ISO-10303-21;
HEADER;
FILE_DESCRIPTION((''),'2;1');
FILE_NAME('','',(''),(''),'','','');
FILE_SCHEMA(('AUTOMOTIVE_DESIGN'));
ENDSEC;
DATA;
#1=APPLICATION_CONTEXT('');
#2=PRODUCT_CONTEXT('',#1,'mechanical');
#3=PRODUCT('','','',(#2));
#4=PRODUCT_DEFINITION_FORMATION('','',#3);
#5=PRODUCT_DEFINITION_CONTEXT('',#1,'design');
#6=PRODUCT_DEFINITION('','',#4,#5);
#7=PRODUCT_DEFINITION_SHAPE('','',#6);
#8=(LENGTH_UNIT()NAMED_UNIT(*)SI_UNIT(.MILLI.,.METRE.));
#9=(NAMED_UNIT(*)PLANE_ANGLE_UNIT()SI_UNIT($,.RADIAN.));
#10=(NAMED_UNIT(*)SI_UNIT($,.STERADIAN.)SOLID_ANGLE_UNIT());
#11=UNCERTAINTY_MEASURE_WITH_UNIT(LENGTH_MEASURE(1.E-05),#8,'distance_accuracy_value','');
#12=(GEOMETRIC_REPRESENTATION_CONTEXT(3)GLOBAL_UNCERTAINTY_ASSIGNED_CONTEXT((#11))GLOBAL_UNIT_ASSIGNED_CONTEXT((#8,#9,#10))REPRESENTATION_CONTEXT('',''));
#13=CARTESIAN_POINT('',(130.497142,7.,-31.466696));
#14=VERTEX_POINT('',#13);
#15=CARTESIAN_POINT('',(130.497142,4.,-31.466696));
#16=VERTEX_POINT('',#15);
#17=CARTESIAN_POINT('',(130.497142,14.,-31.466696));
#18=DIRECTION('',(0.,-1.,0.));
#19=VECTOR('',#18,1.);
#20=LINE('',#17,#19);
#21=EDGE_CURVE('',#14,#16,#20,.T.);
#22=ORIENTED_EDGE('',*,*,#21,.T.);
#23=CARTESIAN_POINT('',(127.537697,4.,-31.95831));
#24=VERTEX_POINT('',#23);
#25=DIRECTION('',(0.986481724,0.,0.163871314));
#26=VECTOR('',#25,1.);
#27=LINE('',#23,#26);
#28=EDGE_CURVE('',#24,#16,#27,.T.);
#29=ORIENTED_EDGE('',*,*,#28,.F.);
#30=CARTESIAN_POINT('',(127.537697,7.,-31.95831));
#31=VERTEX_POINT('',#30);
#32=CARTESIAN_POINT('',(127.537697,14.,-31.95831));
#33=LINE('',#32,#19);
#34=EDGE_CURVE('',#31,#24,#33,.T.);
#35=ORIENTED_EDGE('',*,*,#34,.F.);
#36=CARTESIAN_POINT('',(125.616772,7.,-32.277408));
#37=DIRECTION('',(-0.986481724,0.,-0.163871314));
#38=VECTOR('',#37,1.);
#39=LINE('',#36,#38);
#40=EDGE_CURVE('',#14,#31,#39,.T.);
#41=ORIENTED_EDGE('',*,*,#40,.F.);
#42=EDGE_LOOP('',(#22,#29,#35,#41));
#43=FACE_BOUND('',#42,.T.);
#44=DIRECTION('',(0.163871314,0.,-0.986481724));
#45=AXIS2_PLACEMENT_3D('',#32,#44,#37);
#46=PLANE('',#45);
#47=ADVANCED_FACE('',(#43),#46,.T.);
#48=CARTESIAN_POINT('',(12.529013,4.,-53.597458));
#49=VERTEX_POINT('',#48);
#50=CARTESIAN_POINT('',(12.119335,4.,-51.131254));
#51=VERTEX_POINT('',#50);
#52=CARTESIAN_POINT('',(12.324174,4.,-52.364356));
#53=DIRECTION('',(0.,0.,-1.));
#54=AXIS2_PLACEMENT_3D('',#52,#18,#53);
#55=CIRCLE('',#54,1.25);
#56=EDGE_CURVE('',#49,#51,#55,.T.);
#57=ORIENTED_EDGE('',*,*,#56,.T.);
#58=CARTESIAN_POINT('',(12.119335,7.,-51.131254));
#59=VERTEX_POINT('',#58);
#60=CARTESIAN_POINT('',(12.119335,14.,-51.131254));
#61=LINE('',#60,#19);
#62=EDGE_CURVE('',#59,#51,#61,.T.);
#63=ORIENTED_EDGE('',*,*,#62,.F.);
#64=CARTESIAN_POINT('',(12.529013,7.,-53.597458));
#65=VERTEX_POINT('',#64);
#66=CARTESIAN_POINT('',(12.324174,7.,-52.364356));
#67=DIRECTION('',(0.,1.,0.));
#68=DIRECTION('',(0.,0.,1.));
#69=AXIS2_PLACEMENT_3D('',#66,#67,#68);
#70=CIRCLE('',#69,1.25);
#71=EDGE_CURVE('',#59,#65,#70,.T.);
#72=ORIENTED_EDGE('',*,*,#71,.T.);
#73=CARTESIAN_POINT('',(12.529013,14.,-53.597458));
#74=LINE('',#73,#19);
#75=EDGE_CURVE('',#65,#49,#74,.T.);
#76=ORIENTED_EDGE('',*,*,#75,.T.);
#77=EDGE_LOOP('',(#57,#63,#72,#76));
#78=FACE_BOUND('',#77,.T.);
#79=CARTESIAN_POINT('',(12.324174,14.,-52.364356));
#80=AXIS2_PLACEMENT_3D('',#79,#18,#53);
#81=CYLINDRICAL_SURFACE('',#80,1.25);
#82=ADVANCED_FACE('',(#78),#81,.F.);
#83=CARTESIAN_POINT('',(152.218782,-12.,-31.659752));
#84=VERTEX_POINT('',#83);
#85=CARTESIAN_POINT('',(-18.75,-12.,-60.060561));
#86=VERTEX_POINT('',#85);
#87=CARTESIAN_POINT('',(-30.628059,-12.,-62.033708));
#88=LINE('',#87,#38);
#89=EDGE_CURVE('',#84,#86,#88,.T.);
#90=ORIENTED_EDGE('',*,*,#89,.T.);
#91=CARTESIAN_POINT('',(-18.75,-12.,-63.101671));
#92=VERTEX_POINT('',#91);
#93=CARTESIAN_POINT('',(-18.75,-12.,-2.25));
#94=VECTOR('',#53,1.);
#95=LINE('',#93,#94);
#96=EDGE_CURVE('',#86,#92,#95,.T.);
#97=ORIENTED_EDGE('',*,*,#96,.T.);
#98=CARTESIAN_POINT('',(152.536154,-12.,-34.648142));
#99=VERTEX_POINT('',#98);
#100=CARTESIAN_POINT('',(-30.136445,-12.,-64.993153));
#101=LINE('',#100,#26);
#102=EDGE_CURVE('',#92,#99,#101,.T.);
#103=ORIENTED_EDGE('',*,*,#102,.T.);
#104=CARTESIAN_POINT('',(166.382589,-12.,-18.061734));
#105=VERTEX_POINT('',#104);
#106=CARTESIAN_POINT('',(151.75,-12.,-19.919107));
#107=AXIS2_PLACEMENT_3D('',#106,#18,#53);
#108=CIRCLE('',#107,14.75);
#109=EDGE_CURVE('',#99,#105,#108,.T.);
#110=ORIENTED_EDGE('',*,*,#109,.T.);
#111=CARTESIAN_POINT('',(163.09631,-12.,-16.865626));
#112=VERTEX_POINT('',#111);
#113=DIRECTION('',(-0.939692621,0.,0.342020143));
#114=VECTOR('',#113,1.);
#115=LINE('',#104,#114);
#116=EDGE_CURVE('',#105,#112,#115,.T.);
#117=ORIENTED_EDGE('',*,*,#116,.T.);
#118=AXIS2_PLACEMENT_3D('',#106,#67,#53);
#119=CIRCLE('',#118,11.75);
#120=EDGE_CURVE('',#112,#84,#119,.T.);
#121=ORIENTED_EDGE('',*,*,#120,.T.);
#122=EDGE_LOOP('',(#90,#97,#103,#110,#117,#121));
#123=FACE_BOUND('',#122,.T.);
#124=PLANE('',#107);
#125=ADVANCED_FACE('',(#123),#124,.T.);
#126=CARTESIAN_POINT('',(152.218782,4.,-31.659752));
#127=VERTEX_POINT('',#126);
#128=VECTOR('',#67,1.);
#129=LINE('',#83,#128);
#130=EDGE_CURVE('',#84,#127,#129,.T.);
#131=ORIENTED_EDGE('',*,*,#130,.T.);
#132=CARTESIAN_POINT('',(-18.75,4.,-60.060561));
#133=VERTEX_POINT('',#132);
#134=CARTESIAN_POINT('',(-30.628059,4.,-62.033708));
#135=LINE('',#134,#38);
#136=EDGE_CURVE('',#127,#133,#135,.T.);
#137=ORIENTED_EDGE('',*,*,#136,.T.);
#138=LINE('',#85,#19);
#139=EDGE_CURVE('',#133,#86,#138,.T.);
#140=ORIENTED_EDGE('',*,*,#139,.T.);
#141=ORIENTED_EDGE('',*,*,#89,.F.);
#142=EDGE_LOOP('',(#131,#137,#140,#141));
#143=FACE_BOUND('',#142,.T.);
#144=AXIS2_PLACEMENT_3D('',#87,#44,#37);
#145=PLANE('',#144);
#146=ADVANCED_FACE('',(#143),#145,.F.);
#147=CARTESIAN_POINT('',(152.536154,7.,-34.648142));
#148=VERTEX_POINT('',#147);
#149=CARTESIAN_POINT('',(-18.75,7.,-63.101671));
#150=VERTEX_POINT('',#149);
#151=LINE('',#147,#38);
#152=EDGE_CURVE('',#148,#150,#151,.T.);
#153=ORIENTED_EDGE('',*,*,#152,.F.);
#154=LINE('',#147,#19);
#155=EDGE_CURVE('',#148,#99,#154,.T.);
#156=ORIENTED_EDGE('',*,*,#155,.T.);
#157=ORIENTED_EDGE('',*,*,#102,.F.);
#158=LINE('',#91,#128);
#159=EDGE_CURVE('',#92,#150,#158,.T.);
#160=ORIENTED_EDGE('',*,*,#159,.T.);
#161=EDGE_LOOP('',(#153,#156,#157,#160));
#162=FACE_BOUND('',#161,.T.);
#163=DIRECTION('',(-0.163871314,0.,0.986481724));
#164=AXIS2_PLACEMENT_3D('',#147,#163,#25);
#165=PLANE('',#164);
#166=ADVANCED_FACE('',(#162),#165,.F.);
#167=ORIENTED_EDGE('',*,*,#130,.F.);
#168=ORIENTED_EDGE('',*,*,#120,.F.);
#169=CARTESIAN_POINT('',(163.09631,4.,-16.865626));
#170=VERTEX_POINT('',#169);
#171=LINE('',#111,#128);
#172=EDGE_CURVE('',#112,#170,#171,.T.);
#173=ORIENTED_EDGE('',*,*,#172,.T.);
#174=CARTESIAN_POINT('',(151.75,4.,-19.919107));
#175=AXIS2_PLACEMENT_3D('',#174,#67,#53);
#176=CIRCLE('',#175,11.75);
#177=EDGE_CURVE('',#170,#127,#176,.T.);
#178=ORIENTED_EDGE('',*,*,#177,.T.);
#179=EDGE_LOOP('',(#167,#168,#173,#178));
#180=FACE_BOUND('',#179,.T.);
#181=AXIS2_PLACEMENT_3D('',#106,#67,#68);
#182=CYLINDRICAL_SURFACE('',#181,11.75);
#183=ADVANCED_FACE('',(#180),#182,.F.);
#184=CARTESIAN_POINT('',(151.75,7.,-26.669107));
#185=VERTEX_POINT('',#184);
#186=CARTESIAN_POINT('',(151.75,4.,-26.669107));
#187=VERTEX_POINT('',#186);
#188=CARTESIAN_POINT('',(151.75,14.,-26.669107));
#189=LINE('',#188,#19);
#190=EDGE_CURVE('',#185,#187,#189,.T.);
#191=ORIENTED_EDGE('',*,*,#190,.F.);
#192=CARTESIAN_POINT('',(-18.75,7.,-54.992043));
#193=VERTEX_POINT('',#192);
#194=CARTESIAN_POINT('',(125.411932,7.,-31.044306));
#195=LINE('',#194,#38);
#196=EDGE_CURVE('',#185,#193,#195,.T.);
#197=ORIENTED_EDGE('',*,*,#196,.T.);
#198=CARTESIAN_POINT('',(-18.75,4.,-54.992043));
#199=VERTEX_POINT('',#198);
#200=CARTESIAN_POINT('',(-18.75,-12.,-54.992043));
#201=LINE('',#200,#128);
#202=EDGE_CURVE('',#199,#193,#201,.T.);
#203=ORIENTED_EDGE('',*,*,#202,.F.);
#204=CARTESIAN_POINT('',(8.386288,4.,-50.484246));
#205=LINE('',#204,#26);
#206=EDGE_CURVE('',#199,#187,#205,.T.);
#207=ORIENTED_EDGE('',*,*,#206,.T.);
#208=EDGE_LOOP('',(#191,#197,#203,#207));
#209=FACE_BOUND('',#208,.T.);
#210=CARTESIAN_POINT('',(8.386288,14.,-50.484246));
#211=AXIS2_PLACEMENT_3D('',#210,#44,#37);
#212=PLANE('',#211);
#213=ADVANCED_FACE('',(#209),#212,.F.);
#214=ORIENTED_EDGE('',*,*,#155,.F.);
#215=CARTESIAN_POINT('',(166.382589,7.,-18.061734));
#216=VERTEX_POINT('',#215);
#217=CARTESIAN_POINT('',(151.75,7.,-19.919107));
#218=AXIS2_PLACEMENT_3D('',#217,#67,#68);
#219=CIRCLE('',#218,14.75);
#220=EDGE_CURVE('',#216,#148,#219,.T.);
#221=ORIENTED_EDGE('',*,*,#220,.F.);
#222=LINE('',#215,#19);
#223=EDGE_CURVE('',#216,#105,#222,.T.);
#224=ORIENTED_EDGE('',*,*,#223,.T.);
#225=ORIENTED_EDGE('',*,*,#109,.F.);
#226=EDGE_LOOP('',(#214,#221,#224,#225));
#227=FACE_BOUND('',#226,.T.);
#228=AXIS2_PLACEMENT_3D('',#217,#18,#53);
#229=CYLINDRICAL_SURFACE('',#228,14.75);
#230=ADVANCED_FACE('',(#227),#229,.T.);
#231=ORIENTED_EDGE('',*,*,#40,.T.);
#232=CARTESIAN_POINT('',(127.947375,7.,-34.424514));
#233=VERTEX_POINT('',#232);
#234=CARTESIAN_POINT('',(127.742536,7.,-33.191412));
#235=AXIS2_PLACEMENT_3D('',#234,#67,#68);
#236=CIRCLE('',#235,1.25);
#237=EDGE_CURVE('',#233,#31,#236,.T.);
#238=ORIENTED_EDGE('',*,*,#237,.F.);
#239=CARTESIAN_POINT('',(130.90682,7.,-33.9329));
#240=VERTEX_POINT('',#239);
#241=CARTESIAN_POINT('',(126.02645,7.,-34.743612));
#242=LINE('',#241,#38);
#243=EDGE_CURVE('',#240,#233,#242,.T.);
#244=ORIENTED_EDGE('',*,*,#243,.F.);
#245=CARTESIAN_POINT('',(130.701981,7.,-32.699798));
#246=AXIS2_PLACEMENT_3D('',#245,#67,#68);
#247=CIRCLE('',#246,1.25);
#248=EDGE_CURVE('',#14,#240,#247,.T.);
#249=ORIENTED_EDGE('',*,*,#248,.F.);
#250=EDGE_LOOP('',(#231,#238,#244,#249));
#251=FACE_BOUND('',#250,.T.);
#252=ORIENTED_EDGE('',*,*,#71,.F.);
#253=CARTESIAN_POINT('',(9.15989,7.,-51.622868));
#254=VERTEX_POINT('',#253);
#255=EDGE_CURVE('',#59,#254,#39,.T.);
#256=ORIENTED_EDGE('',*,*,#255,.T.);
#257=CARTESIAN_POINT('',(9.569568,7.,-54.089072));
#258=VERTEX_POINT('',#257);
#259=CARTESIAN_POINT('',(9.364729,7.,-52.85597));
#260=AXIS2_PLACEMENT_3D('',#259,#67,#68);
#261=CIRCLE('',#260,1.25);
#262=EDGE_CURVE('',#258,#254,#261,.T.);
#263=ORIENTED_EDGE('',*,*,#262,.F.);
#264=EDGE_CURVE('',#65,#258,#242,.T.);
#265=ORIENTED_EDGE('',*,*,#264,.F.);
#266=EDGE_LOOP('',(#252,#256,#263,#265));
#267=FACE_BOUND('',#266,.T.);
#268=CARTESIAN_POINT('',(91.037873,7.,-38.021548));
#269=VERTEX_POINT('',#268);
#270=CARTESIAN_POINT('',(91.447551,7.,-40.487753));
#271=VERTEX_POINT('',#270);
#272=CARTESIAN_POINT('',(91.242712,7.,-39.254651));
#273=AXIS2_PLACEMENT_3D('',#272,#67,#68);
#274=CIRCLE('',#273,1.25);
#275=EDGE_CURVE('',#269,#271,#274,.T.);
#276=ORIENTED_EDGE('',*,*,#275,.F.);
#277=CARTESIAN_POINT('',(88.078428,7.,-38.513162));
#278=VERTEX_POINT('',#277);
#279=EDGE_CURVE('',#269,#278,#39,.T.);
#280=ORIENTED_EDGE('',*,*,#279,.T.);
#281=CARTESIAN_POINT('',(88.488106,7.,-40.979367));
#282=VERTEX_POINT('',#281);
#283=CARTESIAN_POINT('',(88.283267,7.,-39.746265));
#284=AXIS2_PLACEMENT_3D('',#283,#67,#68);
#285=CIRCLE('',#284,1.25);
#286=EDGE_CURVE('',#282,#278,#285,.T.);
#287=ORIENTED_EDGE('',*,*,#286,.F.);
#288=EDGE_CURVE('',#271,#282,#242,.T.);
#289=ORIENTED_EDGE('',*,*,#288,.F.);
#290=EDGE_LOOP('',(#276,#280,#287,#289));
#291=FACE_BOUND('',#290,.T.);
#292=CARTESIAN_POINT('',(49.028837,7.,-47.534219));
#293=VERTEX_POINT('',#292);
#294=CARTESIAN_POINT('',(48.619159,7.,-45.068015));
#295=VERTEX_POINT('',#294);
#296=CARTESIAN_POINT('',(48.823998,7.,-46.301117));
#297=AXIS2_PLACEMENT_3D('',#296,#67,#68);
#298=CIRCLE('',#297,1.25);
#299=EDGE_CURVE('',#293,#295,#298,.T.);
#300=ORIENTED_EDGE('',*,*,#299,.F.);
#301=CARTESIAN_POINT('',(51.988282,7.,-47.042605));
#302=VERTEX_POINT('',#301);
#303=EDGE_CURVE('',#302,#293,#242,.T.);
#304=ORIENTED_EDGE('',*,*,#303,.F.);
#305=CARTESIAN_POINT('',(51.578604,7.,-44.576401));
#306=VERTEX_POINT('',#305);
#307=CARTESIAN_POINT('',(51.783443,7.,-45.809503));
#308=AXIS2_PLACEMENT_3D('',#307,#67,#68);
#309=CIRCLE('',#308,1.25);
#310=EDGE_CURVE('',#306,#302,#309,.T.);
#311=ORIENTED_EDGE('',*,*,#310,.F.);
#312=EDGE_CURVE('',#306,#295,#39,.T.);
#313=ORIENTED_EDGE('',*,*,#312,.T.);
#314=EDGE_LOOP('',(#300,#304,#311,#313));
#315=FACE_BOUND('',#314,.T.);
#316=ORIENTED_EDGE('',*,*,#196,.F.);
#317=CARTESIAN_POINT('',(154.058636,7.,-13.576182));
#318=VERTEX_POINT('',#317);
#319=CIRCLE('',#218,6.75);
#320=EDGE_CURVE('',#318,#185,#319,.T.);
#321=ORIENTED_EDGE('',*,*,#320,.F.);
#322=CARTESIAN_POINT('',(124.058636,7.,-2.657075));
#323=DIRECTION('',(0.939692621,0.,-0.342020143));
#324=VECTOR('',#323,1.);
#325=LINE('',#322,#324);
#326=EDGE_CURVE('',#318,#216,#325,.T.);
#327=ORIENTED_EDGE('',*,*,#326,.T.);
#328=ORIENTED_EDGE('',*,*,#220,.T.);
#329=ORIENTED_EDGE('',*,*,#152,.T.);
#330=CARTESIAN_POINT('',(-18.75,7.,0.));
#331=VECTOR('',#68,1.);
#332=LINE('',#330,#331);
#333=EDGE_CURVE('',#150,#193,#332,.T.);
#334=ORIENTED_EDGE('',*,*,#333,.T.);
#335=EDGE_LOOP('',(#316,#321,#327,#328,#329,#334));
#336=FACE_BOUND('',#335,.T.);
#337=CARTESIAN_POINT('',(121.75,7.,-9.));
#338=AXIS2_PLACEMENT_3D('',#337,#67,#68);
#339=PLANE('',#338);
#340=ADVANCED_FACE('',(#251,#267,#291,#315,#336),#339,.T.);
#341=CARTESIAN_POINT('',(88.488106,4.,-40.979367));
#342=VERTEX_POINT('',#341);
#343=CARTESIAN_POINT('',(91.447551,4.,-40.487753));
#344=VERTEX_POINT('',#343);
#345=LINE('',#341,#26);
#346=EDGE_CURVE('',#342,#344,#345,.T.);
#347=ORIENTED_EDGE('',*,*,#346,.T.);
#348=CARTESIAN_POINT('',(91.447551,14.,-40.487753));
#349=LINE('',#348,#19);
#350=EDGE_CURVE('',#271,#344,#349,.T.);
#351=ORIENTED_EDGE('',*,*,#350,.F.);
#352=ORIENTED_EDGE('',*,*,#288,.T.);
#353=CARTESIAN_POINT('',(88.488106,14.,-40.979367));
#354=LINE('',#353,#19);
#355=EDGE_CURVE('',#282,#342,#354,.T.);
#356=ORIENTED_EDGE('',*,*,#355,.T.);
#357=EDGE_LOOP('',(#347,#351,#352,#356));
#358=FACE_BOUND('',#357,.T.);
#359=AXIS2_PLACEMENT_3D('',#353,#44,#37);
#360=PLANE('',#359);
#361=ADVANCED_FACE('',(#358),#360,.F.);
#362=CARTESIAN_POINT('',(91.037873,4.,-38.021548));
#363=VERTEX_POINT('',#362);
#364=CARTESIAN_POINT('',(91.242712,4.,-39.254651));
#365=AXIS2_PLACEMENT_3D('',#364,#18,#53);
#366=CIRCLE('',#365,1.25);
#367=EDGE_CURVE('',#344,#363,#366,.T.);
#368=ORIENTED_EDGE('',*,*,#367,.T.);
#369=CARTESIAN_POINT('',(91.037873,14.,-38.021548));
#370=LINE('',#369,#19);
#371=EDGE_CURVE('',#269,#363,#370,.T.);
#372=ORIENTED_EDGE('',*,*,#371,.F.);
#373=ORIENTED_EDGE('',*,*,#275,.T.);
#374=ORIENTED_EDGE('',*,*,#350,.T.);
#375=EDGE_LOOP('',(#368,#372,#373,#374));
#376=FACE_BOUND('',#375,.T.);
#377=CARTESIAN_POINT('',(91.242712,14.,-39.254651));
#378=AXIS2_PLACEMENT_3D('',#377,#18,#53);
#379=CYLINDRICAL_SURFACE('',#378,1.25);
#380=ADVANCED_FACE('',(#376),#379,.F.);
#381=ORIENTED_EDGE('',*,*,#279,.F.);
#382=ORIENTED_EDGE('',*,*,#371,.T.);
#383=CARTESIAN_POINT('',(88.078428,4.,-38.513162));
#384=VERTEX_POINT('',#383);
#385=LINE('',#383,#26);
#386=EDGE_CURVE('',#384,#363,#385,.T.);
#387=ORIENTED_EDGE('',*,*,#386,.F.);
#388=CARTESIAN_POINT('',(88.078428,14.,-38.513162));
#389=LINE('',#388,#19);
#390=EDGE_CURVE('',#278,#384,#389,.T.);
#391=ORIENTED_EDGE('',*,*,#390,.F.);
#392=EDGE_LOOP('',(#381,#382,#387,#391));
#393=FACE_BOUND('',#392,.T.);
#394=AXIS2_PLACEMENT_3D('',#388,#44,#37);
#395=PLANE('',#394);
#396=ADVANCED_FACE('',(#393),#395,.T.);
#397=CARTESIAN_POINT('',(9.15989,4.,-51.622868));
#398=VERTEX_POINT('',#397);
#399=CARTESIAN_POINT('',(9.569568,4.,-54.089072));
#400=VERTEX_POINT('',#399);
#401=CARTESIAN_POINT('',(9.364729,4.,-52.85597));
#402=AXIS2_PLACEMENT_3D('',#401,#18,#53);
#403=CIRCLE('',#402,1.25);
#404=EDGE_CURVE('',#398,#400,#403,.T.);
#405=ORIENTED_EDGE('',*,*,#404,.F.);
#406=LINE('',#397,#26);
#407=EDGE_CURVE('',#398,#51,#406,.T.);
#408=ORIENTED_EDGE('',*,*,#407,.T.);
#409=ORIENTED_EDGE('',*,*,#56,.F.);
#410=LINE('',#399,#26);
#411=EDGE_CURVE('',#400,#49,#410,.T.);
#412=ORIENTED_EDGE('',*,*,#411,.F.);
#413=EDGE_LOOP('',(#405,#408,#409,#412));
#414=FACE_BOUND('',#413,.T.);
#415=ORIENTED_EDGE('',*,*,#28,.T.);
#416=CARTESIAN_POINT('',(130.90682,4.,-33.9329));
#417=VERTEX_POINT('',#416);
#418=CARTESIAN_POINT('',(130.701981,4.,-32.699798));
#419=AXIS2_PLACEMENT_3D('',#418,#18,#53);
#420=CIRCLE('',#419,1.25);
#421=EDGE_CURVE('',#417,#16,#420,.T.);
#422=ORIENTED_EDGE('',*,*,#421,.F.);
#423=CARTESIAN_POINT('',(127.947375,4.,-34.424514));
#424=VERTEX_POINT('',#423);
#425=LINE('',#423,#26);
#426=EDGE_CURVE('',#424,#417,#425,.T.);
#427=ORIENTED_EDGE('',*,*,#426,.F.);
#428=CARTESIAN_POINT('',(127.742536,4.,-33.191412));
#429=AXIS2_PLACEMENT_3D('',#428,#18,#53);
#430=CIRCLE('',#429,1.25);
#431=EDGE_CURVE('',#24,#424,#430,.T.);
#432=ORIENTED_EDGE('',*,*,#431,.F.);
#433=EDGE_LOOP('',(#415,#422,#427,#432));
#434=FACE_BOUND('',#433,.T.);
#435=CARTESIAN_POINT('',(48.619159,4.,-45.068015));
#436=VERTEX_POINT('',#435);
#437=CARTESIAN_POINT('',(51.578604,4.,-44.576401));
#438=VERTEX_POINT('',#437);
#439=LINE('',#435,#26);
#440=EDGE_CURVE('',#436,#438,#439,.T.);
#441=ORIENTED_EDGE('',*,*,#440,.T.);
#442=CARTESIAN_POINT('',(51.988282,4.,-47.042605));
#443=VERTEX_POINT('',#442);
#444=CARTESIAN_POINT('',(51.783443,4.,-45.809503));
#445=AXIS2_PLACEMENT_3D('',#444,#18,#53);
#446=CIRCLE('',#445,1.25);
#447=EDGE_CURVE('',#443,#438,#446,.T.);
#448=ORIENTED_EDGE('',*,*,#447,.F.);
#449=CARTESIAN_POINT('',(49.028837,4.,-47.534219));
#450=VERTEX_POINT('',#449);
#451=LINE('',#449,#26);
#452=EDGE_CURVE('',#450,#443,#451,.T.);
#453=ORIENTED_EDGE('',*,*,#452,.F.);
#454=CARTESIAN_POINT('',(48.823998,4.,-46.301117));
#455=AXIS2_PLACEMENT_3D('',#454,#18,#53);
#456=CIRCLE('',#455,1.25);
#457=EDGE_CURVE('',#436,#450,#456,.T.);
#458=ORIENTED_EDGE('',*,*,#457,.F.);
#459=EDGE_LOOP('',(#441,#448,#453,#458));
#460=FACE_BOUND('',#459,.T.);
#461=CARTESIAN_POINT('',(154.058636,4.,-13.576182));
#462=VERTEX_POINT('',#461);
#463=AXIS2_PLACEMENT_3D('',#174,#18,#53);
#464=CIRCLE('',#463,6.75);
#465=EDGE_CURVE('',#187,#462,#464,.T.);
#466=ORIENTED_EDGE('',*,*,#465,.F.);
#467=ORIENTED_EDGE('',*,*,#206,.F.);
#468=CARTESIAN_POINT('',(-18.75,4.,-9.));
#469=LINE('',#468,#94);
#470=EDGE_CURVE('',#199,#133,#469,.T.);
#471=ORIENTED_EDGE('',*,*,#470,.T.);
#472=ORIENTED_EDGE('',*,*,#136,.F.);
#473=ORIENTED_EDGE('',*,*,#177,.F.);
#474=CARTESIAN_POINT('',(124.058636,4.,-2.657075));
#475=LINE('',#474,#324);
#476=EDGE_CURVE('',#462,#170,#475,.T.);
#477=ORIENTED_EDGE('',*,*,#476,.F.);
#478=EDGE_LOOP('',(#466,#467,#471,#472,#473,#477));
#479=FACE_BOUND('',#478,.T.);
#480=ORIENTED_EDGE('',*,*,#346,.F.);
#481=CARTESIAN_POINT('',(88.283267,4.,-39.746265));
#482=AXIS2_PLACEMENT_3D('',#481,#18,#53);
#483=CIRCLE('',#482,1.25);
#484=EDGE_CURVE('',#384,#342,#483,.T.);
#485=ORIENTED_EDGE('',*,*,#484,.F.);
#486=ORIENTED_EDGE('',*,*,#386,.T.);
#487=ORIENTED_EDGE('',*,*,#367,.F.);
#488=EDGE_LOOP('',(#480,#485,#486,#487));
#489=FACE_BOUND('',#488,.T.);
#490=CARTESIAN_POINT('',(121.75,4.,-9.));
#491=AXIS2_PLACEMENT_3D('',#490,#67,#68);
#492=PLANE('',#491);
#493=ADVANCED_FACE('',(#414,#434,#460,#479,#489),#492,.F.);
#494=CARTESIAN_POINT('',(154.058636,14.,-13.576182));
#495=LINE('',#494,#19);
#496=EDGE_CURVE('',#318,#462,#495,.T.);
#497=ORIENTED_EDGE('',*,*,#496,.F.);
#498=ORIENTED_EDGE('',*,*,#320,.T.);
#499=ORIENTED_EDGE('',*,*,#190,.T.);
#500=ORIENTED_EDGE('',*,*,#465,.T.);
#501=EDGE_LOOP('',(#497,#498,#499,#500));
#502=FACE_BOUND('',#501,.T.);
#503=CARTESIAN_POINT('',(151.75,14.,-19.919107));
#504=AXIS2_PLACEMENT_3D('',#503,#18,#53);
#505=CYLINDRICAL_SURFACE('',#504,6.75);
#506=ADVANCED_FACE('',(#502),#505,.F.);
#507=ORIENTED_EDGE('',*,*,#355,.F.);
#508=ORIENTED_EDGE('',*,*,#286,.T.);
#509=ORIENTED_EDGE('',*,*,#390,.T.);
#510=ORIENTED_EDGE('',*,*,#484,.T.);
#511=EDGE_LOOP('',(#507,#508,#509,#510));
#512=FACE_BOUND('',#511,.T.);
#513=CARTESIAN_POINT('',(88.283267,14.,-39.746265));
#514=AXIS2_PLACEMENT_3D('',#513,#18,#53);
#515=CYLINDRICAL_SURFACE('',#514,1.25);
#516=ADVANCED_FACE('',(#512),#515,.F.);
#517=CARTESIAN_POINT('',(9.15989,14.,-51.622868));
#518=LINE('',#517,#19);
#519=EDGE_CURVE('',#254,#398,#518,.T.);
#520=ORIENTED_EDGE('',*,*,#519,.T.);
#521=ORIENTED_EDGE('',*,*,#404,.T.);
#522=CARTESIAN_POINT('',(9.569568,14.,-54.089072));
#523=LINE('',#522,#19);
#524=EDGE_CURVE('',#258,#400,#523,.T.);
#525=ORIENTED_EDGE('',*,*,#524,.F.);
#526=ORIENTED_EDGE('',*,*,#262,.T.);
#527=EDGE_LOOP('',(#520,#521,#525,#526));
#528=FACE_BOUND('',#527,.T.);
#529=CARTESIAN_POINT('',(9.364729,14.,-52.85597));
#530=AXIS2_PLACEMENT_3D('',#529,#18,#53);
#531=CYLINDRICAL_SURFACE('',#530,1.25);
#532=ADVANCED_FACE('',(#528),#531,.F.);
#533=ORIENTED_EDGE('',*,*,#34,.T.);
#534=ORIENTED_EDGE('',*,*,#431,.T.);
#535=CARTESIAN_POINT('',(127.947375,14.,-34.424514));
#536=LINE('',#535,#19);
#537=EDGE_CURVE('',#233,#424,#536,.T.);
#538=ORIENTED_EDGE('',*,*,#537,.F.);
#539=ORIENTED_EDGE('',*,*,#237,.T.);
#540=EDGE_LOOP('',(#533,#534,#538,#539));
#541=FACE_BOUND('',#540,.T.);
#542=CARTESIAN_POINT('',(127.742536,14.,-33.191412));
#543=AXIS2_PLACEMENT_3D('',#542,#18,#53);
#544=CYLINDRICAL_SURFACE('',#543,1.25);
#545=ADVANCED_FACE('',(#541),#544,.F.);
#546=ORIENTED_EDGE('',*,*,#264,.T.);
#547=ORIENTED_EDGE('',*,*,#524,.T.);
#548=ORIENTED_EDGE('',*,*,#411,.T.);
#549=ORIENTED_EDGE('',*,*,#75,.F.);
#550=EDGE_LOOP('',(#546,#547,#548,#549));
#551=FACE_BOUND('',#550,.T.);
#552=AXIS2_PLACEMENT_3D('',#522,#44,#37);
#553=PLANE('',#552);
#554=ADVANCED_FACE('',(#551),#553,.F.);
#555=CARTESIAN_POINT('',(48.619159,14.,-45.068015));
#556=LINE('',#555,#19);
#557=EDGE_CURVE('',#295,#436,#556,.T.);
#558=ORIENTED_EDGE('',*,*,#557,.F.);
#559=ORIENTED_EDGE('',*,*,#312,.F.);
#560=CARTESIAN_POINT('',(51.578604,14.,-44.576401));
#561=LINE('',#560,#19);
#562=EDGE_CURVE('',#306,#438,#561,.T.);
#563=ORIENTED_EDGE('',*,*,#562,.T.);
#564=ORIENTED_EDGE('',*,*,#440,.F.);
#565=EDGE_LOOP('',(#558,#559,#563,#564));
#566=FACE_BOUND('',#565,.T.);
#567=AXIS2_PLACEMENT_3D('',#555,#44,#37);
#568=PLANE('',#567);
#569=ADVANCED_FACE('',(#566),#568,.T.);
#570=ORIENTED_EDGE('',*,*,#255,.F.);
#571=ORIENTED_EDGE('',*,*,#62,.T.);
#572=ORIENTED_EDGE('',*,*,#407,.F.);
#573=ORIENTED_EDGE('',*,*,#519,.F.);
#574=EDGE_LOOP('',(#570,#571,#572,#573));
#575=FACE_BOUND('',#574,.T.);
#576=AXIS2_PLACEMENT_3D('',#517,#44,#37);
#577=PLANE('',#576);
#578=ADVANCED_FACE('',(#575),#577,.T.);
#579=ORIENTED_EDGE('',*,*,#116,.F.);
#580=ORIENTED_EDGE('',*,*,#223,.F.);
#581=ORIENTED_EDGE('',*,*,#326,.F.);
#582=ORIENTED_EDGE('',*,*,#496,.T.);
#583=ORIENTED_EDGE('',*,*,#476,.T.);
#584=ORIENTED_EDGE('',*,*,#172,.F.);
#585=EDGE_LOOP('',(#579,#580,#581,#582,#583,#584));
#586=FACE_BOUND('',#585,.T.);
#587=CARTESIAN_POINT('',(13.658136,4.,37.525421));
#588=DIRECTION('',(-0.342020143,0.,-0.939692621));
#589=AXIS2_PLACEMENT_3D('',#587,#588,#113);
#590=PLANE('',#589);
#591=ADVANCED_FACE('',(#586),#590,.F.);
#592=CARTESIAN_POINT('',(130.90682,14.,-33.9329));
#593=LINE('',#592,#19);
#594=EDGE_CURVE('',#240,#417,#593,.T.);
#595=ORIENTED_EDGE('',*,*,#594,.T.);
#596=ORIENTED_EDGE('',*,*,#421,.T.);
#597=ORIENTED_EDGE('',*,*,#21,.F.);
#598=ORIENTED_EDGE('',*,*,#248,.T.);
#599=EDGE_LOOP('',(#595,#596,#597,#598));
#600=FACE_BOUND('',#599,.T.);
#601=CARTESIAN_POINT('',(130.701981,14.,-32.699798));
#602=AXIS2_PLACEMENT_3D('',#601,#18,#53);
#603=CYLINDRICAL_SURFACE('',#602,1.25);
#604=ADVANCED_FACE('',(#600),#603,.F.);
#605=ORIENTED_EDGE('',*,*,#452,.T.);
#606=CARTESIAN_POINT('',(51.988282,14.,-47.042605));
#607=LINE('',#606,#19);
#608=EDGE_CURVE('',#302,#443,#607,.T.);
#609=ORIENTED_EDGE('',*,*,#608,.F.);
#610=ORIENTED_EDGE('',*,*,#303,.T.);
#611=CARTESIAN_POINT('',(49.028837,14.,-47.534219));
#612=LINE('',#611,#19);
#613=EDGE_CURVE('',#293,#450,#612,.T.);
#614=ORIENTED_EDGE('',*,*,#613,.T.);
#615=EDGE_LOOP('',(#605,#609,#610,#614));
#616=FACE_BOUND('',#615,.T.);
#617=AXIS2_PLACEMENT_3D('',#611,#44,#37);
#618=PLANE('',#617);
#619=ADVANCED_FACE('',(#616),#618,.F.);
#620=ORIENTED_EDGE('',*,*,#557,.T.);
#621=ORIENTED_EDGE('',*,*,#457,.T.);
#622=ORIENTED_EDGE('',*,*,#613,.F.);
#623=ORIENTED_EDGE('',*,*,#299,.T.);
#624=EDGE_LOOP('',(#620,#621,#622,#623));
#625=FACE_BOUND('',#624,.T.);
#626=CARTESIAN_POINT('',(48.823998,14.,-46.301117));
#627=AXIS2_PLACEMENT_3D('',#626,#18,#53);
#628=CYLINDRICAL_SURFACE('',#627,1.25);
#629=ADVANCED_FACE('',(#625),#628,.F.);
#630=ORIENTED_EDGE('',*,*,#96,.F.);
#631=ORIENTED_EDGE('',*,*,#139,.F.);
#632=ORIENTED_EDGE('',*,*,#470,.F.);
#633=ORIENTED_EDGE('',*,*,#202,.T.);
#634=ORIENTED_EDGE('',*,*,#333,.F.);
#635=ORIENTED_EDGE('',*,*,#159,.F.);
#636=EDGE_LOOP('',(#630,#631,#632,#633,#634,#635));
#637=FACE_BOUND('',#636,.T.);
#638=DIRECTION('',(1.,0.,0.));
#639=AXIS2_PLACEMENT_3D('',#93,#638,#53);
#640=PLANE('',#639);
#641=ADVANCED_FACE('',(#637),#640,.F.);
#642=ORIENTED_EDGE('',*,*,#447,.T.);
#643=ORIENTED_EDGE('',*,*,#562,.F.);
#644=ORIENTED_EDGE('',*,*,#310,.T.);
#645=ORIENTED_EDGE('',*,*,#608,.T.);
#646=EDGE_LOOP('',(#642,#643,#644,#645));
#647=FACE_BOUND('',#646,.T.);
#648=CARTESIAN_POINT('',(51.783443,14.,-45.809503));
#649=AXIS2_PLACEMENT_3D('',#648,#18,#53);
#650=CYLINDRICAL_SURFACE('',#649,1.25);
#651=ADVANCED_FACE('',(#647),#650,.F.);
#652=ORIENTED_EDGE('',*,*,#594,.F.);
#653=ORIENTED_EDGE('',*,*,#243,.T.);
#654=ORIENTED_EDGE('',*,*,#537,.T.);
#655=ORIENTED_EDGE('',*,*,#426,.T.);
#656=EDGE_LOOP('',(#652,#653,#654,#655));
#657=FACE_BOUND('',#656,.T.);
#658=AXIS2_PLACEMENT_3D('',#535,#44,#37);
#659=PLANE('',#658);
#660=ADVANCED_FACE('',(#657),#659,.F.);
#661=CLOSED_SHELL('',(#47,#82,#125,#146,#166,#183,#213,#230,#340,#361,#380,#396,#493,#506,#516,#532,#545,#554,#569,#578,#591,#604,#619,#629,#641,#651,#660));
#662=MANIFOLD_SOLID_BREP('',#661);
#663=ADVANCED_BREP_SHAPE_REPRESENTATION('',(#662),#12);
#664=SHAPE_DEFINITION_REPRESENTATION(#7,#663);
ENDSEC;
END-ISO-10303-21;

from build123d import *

# Parameters (mm, degrees)
SKETCH_1_W           = 35
SKETCH_1_H           = 55
EXTRUDE_1_DEPTH      = 1
EXTRUDE_2_DEPTH      = 3
SKETCH_3_R           = 5
CUT_EXTRUDE_1_DEPTH  = 169.569903897
SKETCH_4_R           = 4
CUT_EXTRUDE_2_DEPTH  = 2
SKETCH_5_R           = 2
CUT_EXTRUDE_3_DEPTH  = 2
EXTRUDE_START        = 7
EXTRUDE_3_DEPTH      = 7
CUT_EXTRUDE_START    = -1.5
SKETCH_9_W           = 10
SKETCH_9_H           = 26
CUT_EXTRUDE_4_DEPTH  = 168.318874833
SKETCH_10_R          = 1.5
CUT_EXTRUDE_5_DEPTH  = 194.595583627
EXTRUDE_4_DEPTH      = 3
SKETCH_13_W          = 334.012533363
SKETCH_13_H          = 161.456209481
CUT_EXTRUDE_6_DEPTH  = 10
SKETCH_14_R          = 3.5
CUT_EXTRUDE_7_DEPTH  = 2.5
SKETCH_15_R          = 5
CUT_EXTRUDE_8_DEPTH  = 179.854165453
EXTRUDE_START_2      = 16
EXTRUDE_5_DEPTH      = 16
EXTRUDE_6_DEPTH      = 7
SKETCH_19_W          = 10
SKETCH_19_H          = 26
CUT_EXTRUDE_9_DEPTH  = 180.209193181
SKETCH_20_R          = 1.5
CUT_EXTRUDE_10_DEPTH = 175.844216376
THREAD_1_PITCH       = 0.6
CUT_EXTRUDE_11_DEPTH = 181.709193232
SKETCH_22_W          = 13
SKETCH_22_H          = 1.5
CUT_EXTRUDE_12_DEPTH = 7
SKETCH_23_R          = 5
EXTRUDE_7_DEPTH      = 2
CUT_EXTRUDE_START_2  = -3
CUT_EXTRUDE_15_DEPTH = 177.762490825
SKETCH_25_R          = 7.5
CUT_EXTRUDE_16_DEPTH = 4
CUT_EXTRUDE_17_DEPTH = 10
SKETCH_27_R          = 1.75
CUT_EXTRUDE_18_DEPTH = 10
CUT_EXTRUDE_19_DEPTH = 180.762490825
CUT_EXTRUDE_START_3  = -10
SKETCH_29_R          = 3.5
CUT_EXTRUDE_23_DEPTH = 10
CUT_EXTRUDE_24_DEPTH = 10


with BuildPart() as part:
    # Sketch 1 → 凸台-拉伸1 (new body)
    with BuildSketch(Plane(origin=(0, 0, 0), x_dir=(1, 0, 0), z_dir=(0, 1, 0))):
        Rectangle(SKETCH_1_W, SKETCH_1_H)
    extrude(amount=EXTRUDE_1_DEPTH)

    # 草图2 → 凸台-拉伸2 (add)
    with BuildSketch(Plane(origin=(0, 1, 0), x_dir=(1, 0, 0), z_dir=(0, 1, 0))):
        with BuildLine():
            Line((106.75, -2.25), (106.75, 2.25))
            Line((106.75, 2.25), (121.75, 2.25))
            ThreePointArc((121.75, 2.25), (122.922125199, 2.352547667), (124.058635967, 2.65707481))
            Line((124.058635967, 2.65707481), (154.058635967, 13.576181838))
            ThreePointArc((154.058635967, 13.576181838), (158.397452333, 21.091232227), (151.75, 26.669107028))
            Line((151.75, 26.669107028), (-31.447415548, 57.101298968))
            ThreePointArc((-31.447415548, 57.101298968), (-37.800418235, 56.264673928), (-42.609265279, 52.029632639))
            Line((-42.609265279, 52.029632639), (-60.161792173, 23.605896086))
            ThreePointArc((-60.161792173, 23.605896086), (-61.717833724, 20.073278016), (-62.25, 16.25))
            Line((-62.25, 16.25), (-62.25, -16.25))
            ThreePointArc((-62.25, -16.25), (-61.717833724, -20.073278016), (-60.161792173, -23.605896086))
            Line((-60.161792173, -23.605896086), (-42.609265279, -52.029632639))
            ThreePointArc((-42.609265279, -52.029632639), (-37.800418235, -56.264673928), (-31.447415548, -57.101298968))
            Line((-31.447415548, -57.101298968), (151.75, -26.669107028))
            ThreePointArc((151.75, -26.669107028), (158.397452333, -21.091232227), (154.058635967, -13.576181838))
            Line((154.058635967, -13.576181838), (124.058635967, -2.65707481))
            ThreePointArc((124.058635967, -2.65707481), (122.922125199, -2.352547667), (121.75, -2.25))
            Line((121.75, -2.25), (106.75, -2.25))
        make_face()
    extrude(amount=EXTRUDE_2_DEPTH)

    # 草图3 → 切除-拉伸1 (cut, through all)
    with BuildSketch(Plane(origin=(0, 4, 0), x_dir=(1, 0, 0), z_dir=(0, 1, 0))):
        with Locations(Location((-48.25, 16.25, 0), (0, 0, 270))):
            Circle(SKETCH_3_R)
        with Locations(Location((-48.25, -16.25, 0), (0, 0, 270))):
            Circle(SKETCH_3_R)
    extrude(amount=-CUT_EXTRUDE_1_DEPTH, mode=Mode.SUBTRACT)

    # 草图4 → 切除-拉伸2 (cut)
    with BuildSketch(Plane(origin=(0, 4, 0), x_dir=(1, 0, 0), z_dir=(0, 1, 0))):
        with Locations(Location((-33.25, 46.25, 0), (0, 0, 270))):
            Circle(SKETCH_4_R)
        with Locations(Location((-33.25, -46.25, 0), (0, 0, 270))):
            Circle(SKETCH_4_R)
    extrude(amount=-CUT_EXTRUDE_2_DEPTH, mode=Mode.SUBTRACT)

    # 草图5 → 切除-拉伸3 (cut)
    with BuildSketch(Plane(origin=(0, 4, 0), x_dir=(1, 0, 0), z_dir=(0, 1, 0))):
        with Locations(Location((121.75, 9, 0), (0, 0, 270))):
            Circle(SKETCH_5_R)
        with Locations(Location((121.75, -9, 0), (0, 0, 270))):
            Circle(SKETCH_5_R)
        with Locations(Location((151.75, 19.919107028, 0), (0, 0, 270))):
            Circle(SKETCH_5_R)
        with Locations(Location((151.75, -19.919107028, 0), (0, 0, 270))):
            Circle(SKETCH_5_R)
    extrude(amount=-CUT_EXTRUDE_3_DEPTH, mode=Mode.SUBTRACT)

    # 草图8 → 凸台-拉伸3 (add)
    with BuildSketch(Plane.XZ.offset(-1).offset(EXTRUDE_START)):
        with BuildLine():
            Line((-26.75, -26.25), (-39.75, -26.25))
            Line((-39.75, -26.25), (-39.75, -55.124119675))
            ThreePointArc((-39.75, -55.124119675), (-35.798281322, -56.950759894), (-31.447415548, -57.101298968))
            Line((-31.447415548, -57.101298968), (-26.75, -56.320978726))
            Line((-26.75, -56.320978726), (-26.75, -26.25))
        make_face()
    extrude_3 = extrude(amount=-EXTRUDE_3_DEPTH)

    # 镜向1: 凸台-拉伸3 across plane
    add(extrude_3.mirror(Plane.XY))

    # 草图9 → 切除-拉伸4 (cut, through all)
    with BuildSketch(Plane.XZ.offset(6).offset(CUT_EXTRUDE_START)):
        with Locations((-33.25, -40.75)):
            Rectangle(SKETCH_9_W, SKETCH_9_H)
    cut_extrude_4 = extrude(amount=-CUT_EXTRUDE_4_DEPTH, mode=Mode.SUBTRACT)

    # 镜向2: 切除-拉伸4 across plane
    add(cut_extrude_4.mirror(Plane.XY), mode=Mode.SUBTRACT)

    # 草图10 → 切除-拉伸5 (cut, through all)
    with BuildSketch(Plane.XY.offset(-53.75)):
        with Locations((-33.25, -1.5)):
            Circle(SKETCH_10_R)
    cut_extrude_5 = extrude(amount=-CUT_EXTRUDE_5_DEPTH, mode=Mode.SUBTRACT)

    # 镜向3: 切除-拉伸5 across plane
    add(cut_extrude_5.mirror(Plane.XY), mode=Mode.SUBTRACT)

    # 草图12 → 凸台-拉伸4 (add)
    with BuildSketch(Plane(origin=(0, 4, 0), x_dir=(1, 0, 0), z_dir=(0, 1, 0))):
        with BuildLine():
            Line((152.536154407, 34.648141662), (-30.136445037, 64.993152763))
            ThreePointArc((-30.136445037, 64.993152763), (-32.296727103, 65.226071005), (-34.469475839, 65.210824842))
            Line((-34.469475839, 65.210824842), (-60.161792173, 23.605896086))
            ThreePointArc((-60.161792173, 23.605896086), (-61.717833724, 20.073278016), (-62.25, 16.25))
            Line((-62.25, 16.25), (-62.25, 2.25))
            Line((-62.25, 2.25), (121.75, 2.25))
            ThreePointArc((121.75, 2.25), (122.922125199, 2.352547667), (124.058635967, 2.65707481))
            Line((124.058635967, 2.65707481), (166.382589153, 18.061733966))
            ThreePointArc((166.382589153, 18.061733966), (163.073058037, 29.371665237), (152.536154407, 34.648141662))
        make_face()
    extrude(amount=EXTRUDE_4_DEPTH)

    # 草图13 → 切除-拉伸6 (cut)
    with BuildSketch(Plane.XZ.offset(-4)):
        with Locations((47.836319436, 6.16656882)):
            Rectangle(SKETCH_13_W, SKETCH_13_H)
    extrude(amount=CUT_EXTRUDE_6_DEPTH, mode=Mode.SUBTRACT)

    # 草图14 → 切除-拉伸7 (cut)
    with BuildSketch(Plane.XZ.offset(-4)):
        with Locations(Location((151.75, -19.919107028, 0), (0, 0, 270))):
            Circle(SKETCH_14_R)
        with Locations(Location((121.75, -9, 0), (0, 0, 270))):
            Circle(SKETCH_14_R)
    extrude(amount=-CUT_EXTRUDE_7_DEPTH, mode=Mode.SUBTRACT)

    # 草图15 → 切除-拉伸8 (cut, through all)
    with BuildSketch(Plane.XZ.offset(-4)):
        with Locations(Location((-48.25, -16.25, 0), (0, 0, 270))):
            Circle(SKETCH_15_R)
    extrude(amount=-CUT_EXTRUDE_8_DEPTH, mode=Mode.SUBTRACT)

    # 草图17 → 凸台-拉伸5 (add)
    with BuildSketch(Plane.XZ.offset(-4).offset(EXTRUDE_START_2)):
        with BuildLine():
            Line((-30.628058978, -62.03370759), (152.218782473, -31.659751942))
            ThreePointArc((152.218782473, -31.659751942), (161.216553887, -26.879484712), (163.096310198, -16.865626245))
            Line((163.096310198, -16.865626245), (166.382589153, -18.061733966))
            ThreePointArc((166.382589153, -18.061733966), (163.073058037, -29.371665237), (152.536154407, -34.648141662))
            Line((152.536154407, -34.648141662), (-30.136445037, -64.993152763))
            ThreePointArc((-30.136445037, -64.993152763), (-32.296727103, -65.226071005), (-34.469475839, -65.210824842))
            Line((-34.469475839, -65.210824842), (-36.504423199, -61.915526791))
            ThreePointArc((-36.504423199, -61.915526791), (-33.571714316, -62.246765295), (-30.628058978, -62.03370759))
        make_face()
    extrude(amount=-EXTRUDE_5_DEPTH)

    # 草图18 → 凸台-拉伸6 (add)
    with BuildSketch(Plane(origin=(0, 7, 0), x_dir=(1, 0, 0), z_dir=(0, 1, 0))):
        with BuildLine():
            Line((-39.75, 56.65979236), (-39.75, 26.25))
            Line((-39.75, 26.25), (-26.75, 26.25))
            Line((-26.75, 26.25), (-26.75, 64.430606916))
            Line((-26.75, 64.430606916), (-30.136445037, 64.993152763))
            ThreePointArc((-30.136445037, 64.993152763), (-32.296727103, 65.226071005), (-34.469475839, 65.210824842))
            Line((-34.469475839, 65.210824842), (-39.75, 56.65979236))
        make_face()
    extrude(amount=EXTRUDE_6_DEPTH)

    # 草图19 → 切除-拉伸9 (cut, through all)
    with BuildSketch(Plane(origin=(0, 14, 0), x_dir=(1, 0, 0), z_dir=(0, 1, 0)).offset(CUT_EXTRUDE_START)):
        with Locations((-33.25, 40.75)):
            Rectangle(SKETCH_19_W, SKETCH_19_H)
    extrude(amount=-CUT_EXTRUDE_9_DEPTH, mode=Mode.SUBTRACT)

    # 草图20 → 切除-拉伸10 (cut, through all)
    with BuildSketch(Plane.XY.offset(-53.75)):
        with Locations((-33.25, 9.5)):
            Circle(SKETCH_20_R)
    extrude(amount=-CUT_EXTRUDE_10_DEPTH, mode=Mode.SUBTRACT)

    # 螺纹线1: the profile of Sketch 1 2 profile screwed along a right-hand helix of 25 turns, 6 arcs to a turn; built about Z, then put on its axis
    thread_1_z = Axis((0, 0, 0), (0, 0, 1))
    thread_1_corners = [(1.4997, 0, -0.000173205), (1.824759525, 0, 0.187499999), (1.824759525, 0, 0.262499999), (1.4997, 0, 0.450173203)]
    with BuildLine(mode=Mode.PRIVATE) as thread_1_profile:
        Line(thread_1_corners[0], thread_1_corners[1])
        Line(thread_1_corners[1], thread_1_corners[2])
        Line(thread_1_corners[2], thread_1_corners[3])
        Line(thread_1_corners[3], thread_1_corners[0])
    thread_1_cap = Face(thread_1_profile.wire())
    thread_1_turn_angles = [0, 30, 60, 90, 120, 150, 180, 210, 240, 270, 300, 330, 360]
    thread_1_turn_weights = [1, 0.8660254037844387, 1, 0.8660254037844387, 1, 0.8660254037844387, 1, 0.8660254037844387, 1, 0.8660254037844387, 1, 0.8660254037844387, 1]
    thread_1_turn_rails = [Edge.make_bspline([Vector(p[0], p[1], 0).rotate(thread_1_z, thread_1_turn_angles[k]) / thread_1_turn_weights[k] + Vector(0, 0, p[2] + THREAD_1_PITCH * thread_1_turn_angles[k] / 360) for k in range(13)], [0, 0, 0, 1, 1, 2, 2, 3, 3, 4, 4, 5, 5, 6, 6, 6], 2, thread_1_turn_weights) for p in thread_1_corners]
    thread_1_turn_sides = [Face.make_surface_from_curves(thread_1_turn_rails[p[0]], thread_1_turn_rails[p[1]]) for p in [(0, 1), (1, 2), (2, 3), (3, 0)]]
    thread_1 = Plane(origin=(-33.25, 9.5, -53.75), x_dir=(-1, 0, 0), z_dir=(0, 0, -1)) * Solid(Shell([*[p.moved(Location((0, 0, THREAD_1_PITCH * i))) for i in range(25) for p in thread_1_turn_sides], thread_1_cap, thread_1_cap.rotate(thread_1_z, 9000).moved(Location((0, 0, THREAD_1_PITCH * 9000 / 360)))]))
    add(thread_1, mode=Mode.SUBTRACT)

    # 草图21 → 切除-拉伸11 (cut, through all)
    with BuildSketch(Plane(origin=(0, 14, 0), x_dir=(1, 0, 0), z_dir=(0, 1, 0))):
        with BuildLine():
            Line((-39.75, 27.75), (-26.75, 27.75))
            Line((-26.75, 27.75), (-26.75, 64.430606916))
            Line((-26.75, 64.430606916), (-30.136445037, 64.993152763))
            ThreePointArc((-30.136445037, 64.993152763), (-32.296727103, 65.226071005), (-34.469475839, 65.210824842))
            Line((-34.469475839, 65.210824842), (-39.75, 56.65979236))
            Line((-39.75, 56.65979236), (-39.75, 27.75))
        make_face()
    extrude(amount=-CUT_EXTRUDE_11_DEPTH, mode=Mode.SUBTRACT)

    # 草图22 → 切除-拉伸12 (cut)
    with BuildSketch(Plane(origin=(0, 14, 0), x_dir=(1, 0, 0), z_dir=(0, 1, 0))):
        with Locations((-33.25, 27)):
            Rectangle(SKETCH_22_W, SKETCH_22_H)
    extrude(amount=-CUT_EXTRUDE_12_DEPTH, mode=Mode.SUBTRACT)

    # 草图23 → 凸台-拉伸7 (add)
    with BuildSketch(Plane(origin=(0, 7, 0), x_dir=(1, 0, 0), z_dir=(0, 1, 0))):
        with BuildLine():
            Line((-26.75, 27.75), (-39.75, 27.75))
            Line((-39.75, 27.75), (-39.75, 56.65979236))
            Line((-39.75, 56.65979236), (-60.161792173, 23.605896086))
            ThreePointArc((-60.161792173, 23.605896086), (-61.717833724, 20.073278016), (-62.25, 16.25))
            Line((-62.25, 16.25), (-62.25, 2.25))
            Line((-62.25, 2.25), (-18.75, 2.25))
            Line((-18.75, 2.25), (-18.75, 63.101671489))
            Line((-18.75, 63.101671489), (-26.75, 64.430606916))
            Line((-26.75, 64.430606916), (-26.75, 27.75))
        make_face()
        with Locations(Location((-48.25, 16.25, 0), (0, 0, 90))):
            Circle(SKETCH_23_R, mode=Mode.SUBTRACT)
    extrude(amount=EXTRUDE_7_DEPTH)

    # 草图24 → 切除-拉伸15 (cut, through all)
    with BuildSketch(Plane(origin=(0, 9, 0), x_dir=(1, 0, 0), z_dir=(0, 1, 0)).offset(CUT_EXTRUDE_START_2)):
        Polygon((-45.75, 46.034880297), (-45.75, 27.75), (-39.75, 27.75), (-39.75, 56.65979236), (-45.75, 46.943674541), align=None)
        Polygon((-26.75, 64.430606916), (-26.75, 27.75), (-20.75, 27.75), (-20.75, 63.433905346), align=None)
    extrude(amount=-CUT_EXTRUDE_15_DEPTH, mode=Mode.SUBTRACT)

    # 草图25 → 切除-拉伸16 (cut)
    with BuildSketch(Plane.XZ.offset(-4)):
        with Locations(Location((-48.25, -16.25, 0), (0, 0, 270))):
            Circle(SKETCH_25_R)
    extrude(amount=-CUT_EXTRUDE_16_DEPTH, mode=Mode.SUBTRACT)

    # 草图26 → 切除-拉伸17 (cut)
    with BuildSketch(Plane(origin=(0, 7, 0), x_dir=(1, 0, 0), z_dir=(0, 1, 0))):
        with BuildLine():
            Line((3.5, 31.25), (3.5, 35.25))
            ThreePointArc((3.5, 35.25), (1.75, 37), (0, 35.25))
            Line((0, 35.25), (0, 31.25))
            ThreePointArc((0, 31.25), (1.75, 29.5), (3.5, 31.25))
        make_face()
        with BuildLine():
            ThreePointArc((41.75, 18), (40.512563133, 17.487436867), (40, 16.25))
            Line((40, 16.25), (47.5, 16.25))
            ThreePointArc((47.5, 16.25), (46.987436867, 17.487436867), (45.75, 18))
            Line((45.75, 18), (41.75, 18))
        make_face()
        with BuildLine():
            Line((47.5, 16.25), (40, 16.25))
            ThreePointArc((40, 16.25), (40.512563133, 15.012563133), (41.75, 14.5))
            Line((41.75, 14.5), (45.75, 14.5))
            ThreePointArc((45.75, 14.5), (46.987436867, 15.012563133), (47.5, 16.25))
        make_face()
        with BuildLine():
            Line((81.75, 14.5), (85.75, 14.5))
            ThreePointArc((85.75, 14.5), (87.5, 16.25), (85.75, 18))
            Line((85.75, 18), (81.75, 18))
            ThreePointArc((81.75, 18), (80, 16.25), (81.75, 14.5))
        make_face()
        with BuildLine():
            Line((1.75, 18), (5.75, 18))
            ThreePointArc((5.75, 18), (7.5, 16.25), (5.75, 14.5))
            Line((5.75, 14.5), (1.75, 14.5))
            ThreePointArc((1.75, 14.5), (0, 16.25), (1.75, 18))
        make_face()
    extrude(amount=-CUT_EXTRUDE_17_DEPTH, mode=Mode.SUBTRACT)

    # 草图27 → 切除-拉伸18 (cut)
    with BuildSketch(Plane.XZ.offset(-6)):
        with Locations(Location((-42.75, -32.75, 0), (0, 0, 270))):
            Circle(SKETCH_27_R)
        with Locations(Location((-42.75, -42.75, 0), (0, 0, 270))):
            Circle(SKETCH_27_R)
        with Locations(Location((-23.75, -32.75, 0), (0, 0, 270))):
            Circle(SKETCH_27_R)
        with Locations(Location((-23.75, -42.75, 0), (0, 0, 270))):
            Circle(SKETCH_27_R)
    extrude(amount=-CUT_EXTRUDE_18_DEPTH, mode=Mode.SUBTRACT)

    # 草图28 → 切除-拉伸19 (cut, through all)
    with BuildSketch(Plane(origin=(0, 9, 0), x_dir=(1, 0, 0), z_dir=(0, 1, 0))):
        with BuildLine():
            Line((-26.75, 27.75), (-39.75, 27.75))
            Line((-39.75, 27.75), (-39.75, 56.65979236))
            Line((-39.75, 56.65979236), (-60.161792173, 23.605896086))
            ThreePointArc((-60.161792173, 23.605896086), (-61.717833724, 20.073278016), (-62.25, 16.25))
            Line((-62.25, 16.25), (-62.25, 2.25))
            Line((-62.25, 2.25), (-18.75, 2.25))
            Line((-18.75, 2.25), (-18.75, 63.101671489))
            Line((-18.75, 63.101671489), (-26.75, 64.430606916))
            Line((-26.75, 64.430606916), (-26.75, 27.75))
        make_face()
    extrude(amount=-CUT_EXTRUDE_19_DEPTH, mode=Mode.SUBTRACT)

    # 草图29 → 切除-拉伸23 (cut)
    # profile 1 of 3: a face of its own
    with BuildSketch(Plane.XZ.offset(-4).offset(CUT_EXTRUDE_START_3)):
        with BuildLine():
            Line((-18.75, -2.25), (-18.75, -54.9920433))
            Line((-18.75, -54.9920433), (151.75, -26.669107028))
            ThreePointArc((151.75, -26.669107028), (158.397452333, -21.091232227), (154.058635967, -13.576181838))
            Line((154.058635967, -13.576181838), (124.058635967, -2.65707481))
            ThreePointArc((124.058635967, -2.65707481), (122.922125199, -2.352547667), (121.75, -2.25))
            Line((121.75, -2.25), (-18.75, -2.25))
        make_face()
        with BuildLine():
            Line((0, -35.25), (0, -31.25))
            ThreePointArc((0, -31.25), (1.75, -29.5), (3.5, -31.25))
            Line((3.5, -31.25), (3.5, -35.25))
            ThreePointArc((3.5, -35.25), (1.75, -37), (0, -35.25))
        make_face(mode=Mode.SUBTRACT)
        with BuildLine():
            ThreePointArc((5.75, -14.5), (7.5, -16.25), (5.75, -18))
            Line((5.75, -18), (1.75, -18))
            ThreePointArc((1.75, -18), (0, -16.25), (1.75, -14.5))
            Line((1.75, -14.5), (5.75, -14.5))
        make_face(mode=Mode.SUBTRACT)
        with BuildLine():
            ThreePointArc((45.75, -14.5), (47.5, -16.25), (45.75, -18))
            Line((45.75, -18), (41.75, -18))
            ThreePointArc((41.75, -18), (40, -16.25), (41.75, -14.5))
            Line((41.75, -14.5), (45.75, -14.5))
        make_face(mode=Mode.SUBTRACT)
        with Locations((151.75, -19.919107028)):
            Circle(SKETCH_29_R, mode=Mode.SUBTRACT)
        with BuildLine():
            Line((85.75, -18), (81.75, -18))
            ThreePointArc((81.75, -18), (80, -16.25), (81.75, -14.5))
            Line((81.75, -14.5), (85.75, -14.5))
            ThreePointArc((85.75, -14.5), (87.5, -16.25), (85.75, -18))
        make_face(mode=Mode.SUBTRACT)
        with Locations((121.75, -9)):
            Circle(SKETCH_29_R, mode=Mode.SUBTRACT)
    # profile 2 of 3: a face of its own
    with BuildSketch(Plane.XZ.offset(-4).offset(CUT_EXTRUDE_START_3)):
        with Locations((121.75, -9)):
            Circle(SKETCH_29_R)
    # profile 3 of 3: a face of its own
    with BuildSketch(Plane.XZ.offset(-4).offset(CUT_EXTRUDE_START_3)):
        with Locations((151.75, -19.919107028)):
            Circle(SKETCH_29_R)
    extrude(amount=CUT_EXTRUDE_23_DEPTH, mode=Mode.SUBTRACT)

    # 草图30 → 切除-拉伸24 (cut)
    with BuildSketch(Plane.XZ.offset(-4)):
        with BuildLine():
            Line((9.159890002, -51.622867509), (12.119335175, -51.131253567))
            ThreePointArc((12.119335175, -51.131253567), (13.557276473, -52.15951658), (12.52901346, -53.597457878))
            Line((12.52901346, -53.597457878), (9.569568287, -54.08907182))
            ThreePointArc((9.569568287, -54.08907182), (8.131626989, -53.060808807), (9.159890002, -51.622867509))
        make_face()
        with BuildLine():
            Line((48.619158976, -45.068014955), (51.578604149, -44.576401013))
            ThreePointArc((51.578604149, -44.576401013), (53.016545447, -45.604664026), (51.988282434, -47.042605324))
            Line((51.988282434, -47.042605324), (49.028837261, -47.534219265))
            ThreePointArc((49.028837261, -47.534219265), (47.590895963, -46.505956252), (48.619158976, -45.068014955))
        make_face()
        with BuildLine():
            Line((88.078427951, -38.5131624), (91.037873124, -38.021548459))
            ThreePointArc((91.037873124, -38.021548459), (92.475814422, -39.049811472), (91.447551408, -40.48775277))
            Line((91.447551408, -40.48775277), (88.488106235, -40.979366711))
            ThreePointArc((88.488106235, -40.979366711), (87.050164938, -39.951103698), (88.078427951, -38.5131624))
        make_face()
        with BuildLine():
            Line((127.537696925, -31.958309846), (130.497142098, -31.466695904))
            ThreePointArc((130.497142098, -31.466695904), (131.935083396, -32.494958918), (130.906820383, -33.932900215))
            Line((130.906820383, -33.932900215), (127.94737521, -34.424514157))
            ThreePointArc((127.94737521, -34.424514157), (126.509433912, -33.396251144), (127.537696925, -31.958309846))
        make_face()
    extrude(amount=-CUT_EXTRUDE_24_DEPTH, mode=Mode.SUBTRACT)


solid = part.part
